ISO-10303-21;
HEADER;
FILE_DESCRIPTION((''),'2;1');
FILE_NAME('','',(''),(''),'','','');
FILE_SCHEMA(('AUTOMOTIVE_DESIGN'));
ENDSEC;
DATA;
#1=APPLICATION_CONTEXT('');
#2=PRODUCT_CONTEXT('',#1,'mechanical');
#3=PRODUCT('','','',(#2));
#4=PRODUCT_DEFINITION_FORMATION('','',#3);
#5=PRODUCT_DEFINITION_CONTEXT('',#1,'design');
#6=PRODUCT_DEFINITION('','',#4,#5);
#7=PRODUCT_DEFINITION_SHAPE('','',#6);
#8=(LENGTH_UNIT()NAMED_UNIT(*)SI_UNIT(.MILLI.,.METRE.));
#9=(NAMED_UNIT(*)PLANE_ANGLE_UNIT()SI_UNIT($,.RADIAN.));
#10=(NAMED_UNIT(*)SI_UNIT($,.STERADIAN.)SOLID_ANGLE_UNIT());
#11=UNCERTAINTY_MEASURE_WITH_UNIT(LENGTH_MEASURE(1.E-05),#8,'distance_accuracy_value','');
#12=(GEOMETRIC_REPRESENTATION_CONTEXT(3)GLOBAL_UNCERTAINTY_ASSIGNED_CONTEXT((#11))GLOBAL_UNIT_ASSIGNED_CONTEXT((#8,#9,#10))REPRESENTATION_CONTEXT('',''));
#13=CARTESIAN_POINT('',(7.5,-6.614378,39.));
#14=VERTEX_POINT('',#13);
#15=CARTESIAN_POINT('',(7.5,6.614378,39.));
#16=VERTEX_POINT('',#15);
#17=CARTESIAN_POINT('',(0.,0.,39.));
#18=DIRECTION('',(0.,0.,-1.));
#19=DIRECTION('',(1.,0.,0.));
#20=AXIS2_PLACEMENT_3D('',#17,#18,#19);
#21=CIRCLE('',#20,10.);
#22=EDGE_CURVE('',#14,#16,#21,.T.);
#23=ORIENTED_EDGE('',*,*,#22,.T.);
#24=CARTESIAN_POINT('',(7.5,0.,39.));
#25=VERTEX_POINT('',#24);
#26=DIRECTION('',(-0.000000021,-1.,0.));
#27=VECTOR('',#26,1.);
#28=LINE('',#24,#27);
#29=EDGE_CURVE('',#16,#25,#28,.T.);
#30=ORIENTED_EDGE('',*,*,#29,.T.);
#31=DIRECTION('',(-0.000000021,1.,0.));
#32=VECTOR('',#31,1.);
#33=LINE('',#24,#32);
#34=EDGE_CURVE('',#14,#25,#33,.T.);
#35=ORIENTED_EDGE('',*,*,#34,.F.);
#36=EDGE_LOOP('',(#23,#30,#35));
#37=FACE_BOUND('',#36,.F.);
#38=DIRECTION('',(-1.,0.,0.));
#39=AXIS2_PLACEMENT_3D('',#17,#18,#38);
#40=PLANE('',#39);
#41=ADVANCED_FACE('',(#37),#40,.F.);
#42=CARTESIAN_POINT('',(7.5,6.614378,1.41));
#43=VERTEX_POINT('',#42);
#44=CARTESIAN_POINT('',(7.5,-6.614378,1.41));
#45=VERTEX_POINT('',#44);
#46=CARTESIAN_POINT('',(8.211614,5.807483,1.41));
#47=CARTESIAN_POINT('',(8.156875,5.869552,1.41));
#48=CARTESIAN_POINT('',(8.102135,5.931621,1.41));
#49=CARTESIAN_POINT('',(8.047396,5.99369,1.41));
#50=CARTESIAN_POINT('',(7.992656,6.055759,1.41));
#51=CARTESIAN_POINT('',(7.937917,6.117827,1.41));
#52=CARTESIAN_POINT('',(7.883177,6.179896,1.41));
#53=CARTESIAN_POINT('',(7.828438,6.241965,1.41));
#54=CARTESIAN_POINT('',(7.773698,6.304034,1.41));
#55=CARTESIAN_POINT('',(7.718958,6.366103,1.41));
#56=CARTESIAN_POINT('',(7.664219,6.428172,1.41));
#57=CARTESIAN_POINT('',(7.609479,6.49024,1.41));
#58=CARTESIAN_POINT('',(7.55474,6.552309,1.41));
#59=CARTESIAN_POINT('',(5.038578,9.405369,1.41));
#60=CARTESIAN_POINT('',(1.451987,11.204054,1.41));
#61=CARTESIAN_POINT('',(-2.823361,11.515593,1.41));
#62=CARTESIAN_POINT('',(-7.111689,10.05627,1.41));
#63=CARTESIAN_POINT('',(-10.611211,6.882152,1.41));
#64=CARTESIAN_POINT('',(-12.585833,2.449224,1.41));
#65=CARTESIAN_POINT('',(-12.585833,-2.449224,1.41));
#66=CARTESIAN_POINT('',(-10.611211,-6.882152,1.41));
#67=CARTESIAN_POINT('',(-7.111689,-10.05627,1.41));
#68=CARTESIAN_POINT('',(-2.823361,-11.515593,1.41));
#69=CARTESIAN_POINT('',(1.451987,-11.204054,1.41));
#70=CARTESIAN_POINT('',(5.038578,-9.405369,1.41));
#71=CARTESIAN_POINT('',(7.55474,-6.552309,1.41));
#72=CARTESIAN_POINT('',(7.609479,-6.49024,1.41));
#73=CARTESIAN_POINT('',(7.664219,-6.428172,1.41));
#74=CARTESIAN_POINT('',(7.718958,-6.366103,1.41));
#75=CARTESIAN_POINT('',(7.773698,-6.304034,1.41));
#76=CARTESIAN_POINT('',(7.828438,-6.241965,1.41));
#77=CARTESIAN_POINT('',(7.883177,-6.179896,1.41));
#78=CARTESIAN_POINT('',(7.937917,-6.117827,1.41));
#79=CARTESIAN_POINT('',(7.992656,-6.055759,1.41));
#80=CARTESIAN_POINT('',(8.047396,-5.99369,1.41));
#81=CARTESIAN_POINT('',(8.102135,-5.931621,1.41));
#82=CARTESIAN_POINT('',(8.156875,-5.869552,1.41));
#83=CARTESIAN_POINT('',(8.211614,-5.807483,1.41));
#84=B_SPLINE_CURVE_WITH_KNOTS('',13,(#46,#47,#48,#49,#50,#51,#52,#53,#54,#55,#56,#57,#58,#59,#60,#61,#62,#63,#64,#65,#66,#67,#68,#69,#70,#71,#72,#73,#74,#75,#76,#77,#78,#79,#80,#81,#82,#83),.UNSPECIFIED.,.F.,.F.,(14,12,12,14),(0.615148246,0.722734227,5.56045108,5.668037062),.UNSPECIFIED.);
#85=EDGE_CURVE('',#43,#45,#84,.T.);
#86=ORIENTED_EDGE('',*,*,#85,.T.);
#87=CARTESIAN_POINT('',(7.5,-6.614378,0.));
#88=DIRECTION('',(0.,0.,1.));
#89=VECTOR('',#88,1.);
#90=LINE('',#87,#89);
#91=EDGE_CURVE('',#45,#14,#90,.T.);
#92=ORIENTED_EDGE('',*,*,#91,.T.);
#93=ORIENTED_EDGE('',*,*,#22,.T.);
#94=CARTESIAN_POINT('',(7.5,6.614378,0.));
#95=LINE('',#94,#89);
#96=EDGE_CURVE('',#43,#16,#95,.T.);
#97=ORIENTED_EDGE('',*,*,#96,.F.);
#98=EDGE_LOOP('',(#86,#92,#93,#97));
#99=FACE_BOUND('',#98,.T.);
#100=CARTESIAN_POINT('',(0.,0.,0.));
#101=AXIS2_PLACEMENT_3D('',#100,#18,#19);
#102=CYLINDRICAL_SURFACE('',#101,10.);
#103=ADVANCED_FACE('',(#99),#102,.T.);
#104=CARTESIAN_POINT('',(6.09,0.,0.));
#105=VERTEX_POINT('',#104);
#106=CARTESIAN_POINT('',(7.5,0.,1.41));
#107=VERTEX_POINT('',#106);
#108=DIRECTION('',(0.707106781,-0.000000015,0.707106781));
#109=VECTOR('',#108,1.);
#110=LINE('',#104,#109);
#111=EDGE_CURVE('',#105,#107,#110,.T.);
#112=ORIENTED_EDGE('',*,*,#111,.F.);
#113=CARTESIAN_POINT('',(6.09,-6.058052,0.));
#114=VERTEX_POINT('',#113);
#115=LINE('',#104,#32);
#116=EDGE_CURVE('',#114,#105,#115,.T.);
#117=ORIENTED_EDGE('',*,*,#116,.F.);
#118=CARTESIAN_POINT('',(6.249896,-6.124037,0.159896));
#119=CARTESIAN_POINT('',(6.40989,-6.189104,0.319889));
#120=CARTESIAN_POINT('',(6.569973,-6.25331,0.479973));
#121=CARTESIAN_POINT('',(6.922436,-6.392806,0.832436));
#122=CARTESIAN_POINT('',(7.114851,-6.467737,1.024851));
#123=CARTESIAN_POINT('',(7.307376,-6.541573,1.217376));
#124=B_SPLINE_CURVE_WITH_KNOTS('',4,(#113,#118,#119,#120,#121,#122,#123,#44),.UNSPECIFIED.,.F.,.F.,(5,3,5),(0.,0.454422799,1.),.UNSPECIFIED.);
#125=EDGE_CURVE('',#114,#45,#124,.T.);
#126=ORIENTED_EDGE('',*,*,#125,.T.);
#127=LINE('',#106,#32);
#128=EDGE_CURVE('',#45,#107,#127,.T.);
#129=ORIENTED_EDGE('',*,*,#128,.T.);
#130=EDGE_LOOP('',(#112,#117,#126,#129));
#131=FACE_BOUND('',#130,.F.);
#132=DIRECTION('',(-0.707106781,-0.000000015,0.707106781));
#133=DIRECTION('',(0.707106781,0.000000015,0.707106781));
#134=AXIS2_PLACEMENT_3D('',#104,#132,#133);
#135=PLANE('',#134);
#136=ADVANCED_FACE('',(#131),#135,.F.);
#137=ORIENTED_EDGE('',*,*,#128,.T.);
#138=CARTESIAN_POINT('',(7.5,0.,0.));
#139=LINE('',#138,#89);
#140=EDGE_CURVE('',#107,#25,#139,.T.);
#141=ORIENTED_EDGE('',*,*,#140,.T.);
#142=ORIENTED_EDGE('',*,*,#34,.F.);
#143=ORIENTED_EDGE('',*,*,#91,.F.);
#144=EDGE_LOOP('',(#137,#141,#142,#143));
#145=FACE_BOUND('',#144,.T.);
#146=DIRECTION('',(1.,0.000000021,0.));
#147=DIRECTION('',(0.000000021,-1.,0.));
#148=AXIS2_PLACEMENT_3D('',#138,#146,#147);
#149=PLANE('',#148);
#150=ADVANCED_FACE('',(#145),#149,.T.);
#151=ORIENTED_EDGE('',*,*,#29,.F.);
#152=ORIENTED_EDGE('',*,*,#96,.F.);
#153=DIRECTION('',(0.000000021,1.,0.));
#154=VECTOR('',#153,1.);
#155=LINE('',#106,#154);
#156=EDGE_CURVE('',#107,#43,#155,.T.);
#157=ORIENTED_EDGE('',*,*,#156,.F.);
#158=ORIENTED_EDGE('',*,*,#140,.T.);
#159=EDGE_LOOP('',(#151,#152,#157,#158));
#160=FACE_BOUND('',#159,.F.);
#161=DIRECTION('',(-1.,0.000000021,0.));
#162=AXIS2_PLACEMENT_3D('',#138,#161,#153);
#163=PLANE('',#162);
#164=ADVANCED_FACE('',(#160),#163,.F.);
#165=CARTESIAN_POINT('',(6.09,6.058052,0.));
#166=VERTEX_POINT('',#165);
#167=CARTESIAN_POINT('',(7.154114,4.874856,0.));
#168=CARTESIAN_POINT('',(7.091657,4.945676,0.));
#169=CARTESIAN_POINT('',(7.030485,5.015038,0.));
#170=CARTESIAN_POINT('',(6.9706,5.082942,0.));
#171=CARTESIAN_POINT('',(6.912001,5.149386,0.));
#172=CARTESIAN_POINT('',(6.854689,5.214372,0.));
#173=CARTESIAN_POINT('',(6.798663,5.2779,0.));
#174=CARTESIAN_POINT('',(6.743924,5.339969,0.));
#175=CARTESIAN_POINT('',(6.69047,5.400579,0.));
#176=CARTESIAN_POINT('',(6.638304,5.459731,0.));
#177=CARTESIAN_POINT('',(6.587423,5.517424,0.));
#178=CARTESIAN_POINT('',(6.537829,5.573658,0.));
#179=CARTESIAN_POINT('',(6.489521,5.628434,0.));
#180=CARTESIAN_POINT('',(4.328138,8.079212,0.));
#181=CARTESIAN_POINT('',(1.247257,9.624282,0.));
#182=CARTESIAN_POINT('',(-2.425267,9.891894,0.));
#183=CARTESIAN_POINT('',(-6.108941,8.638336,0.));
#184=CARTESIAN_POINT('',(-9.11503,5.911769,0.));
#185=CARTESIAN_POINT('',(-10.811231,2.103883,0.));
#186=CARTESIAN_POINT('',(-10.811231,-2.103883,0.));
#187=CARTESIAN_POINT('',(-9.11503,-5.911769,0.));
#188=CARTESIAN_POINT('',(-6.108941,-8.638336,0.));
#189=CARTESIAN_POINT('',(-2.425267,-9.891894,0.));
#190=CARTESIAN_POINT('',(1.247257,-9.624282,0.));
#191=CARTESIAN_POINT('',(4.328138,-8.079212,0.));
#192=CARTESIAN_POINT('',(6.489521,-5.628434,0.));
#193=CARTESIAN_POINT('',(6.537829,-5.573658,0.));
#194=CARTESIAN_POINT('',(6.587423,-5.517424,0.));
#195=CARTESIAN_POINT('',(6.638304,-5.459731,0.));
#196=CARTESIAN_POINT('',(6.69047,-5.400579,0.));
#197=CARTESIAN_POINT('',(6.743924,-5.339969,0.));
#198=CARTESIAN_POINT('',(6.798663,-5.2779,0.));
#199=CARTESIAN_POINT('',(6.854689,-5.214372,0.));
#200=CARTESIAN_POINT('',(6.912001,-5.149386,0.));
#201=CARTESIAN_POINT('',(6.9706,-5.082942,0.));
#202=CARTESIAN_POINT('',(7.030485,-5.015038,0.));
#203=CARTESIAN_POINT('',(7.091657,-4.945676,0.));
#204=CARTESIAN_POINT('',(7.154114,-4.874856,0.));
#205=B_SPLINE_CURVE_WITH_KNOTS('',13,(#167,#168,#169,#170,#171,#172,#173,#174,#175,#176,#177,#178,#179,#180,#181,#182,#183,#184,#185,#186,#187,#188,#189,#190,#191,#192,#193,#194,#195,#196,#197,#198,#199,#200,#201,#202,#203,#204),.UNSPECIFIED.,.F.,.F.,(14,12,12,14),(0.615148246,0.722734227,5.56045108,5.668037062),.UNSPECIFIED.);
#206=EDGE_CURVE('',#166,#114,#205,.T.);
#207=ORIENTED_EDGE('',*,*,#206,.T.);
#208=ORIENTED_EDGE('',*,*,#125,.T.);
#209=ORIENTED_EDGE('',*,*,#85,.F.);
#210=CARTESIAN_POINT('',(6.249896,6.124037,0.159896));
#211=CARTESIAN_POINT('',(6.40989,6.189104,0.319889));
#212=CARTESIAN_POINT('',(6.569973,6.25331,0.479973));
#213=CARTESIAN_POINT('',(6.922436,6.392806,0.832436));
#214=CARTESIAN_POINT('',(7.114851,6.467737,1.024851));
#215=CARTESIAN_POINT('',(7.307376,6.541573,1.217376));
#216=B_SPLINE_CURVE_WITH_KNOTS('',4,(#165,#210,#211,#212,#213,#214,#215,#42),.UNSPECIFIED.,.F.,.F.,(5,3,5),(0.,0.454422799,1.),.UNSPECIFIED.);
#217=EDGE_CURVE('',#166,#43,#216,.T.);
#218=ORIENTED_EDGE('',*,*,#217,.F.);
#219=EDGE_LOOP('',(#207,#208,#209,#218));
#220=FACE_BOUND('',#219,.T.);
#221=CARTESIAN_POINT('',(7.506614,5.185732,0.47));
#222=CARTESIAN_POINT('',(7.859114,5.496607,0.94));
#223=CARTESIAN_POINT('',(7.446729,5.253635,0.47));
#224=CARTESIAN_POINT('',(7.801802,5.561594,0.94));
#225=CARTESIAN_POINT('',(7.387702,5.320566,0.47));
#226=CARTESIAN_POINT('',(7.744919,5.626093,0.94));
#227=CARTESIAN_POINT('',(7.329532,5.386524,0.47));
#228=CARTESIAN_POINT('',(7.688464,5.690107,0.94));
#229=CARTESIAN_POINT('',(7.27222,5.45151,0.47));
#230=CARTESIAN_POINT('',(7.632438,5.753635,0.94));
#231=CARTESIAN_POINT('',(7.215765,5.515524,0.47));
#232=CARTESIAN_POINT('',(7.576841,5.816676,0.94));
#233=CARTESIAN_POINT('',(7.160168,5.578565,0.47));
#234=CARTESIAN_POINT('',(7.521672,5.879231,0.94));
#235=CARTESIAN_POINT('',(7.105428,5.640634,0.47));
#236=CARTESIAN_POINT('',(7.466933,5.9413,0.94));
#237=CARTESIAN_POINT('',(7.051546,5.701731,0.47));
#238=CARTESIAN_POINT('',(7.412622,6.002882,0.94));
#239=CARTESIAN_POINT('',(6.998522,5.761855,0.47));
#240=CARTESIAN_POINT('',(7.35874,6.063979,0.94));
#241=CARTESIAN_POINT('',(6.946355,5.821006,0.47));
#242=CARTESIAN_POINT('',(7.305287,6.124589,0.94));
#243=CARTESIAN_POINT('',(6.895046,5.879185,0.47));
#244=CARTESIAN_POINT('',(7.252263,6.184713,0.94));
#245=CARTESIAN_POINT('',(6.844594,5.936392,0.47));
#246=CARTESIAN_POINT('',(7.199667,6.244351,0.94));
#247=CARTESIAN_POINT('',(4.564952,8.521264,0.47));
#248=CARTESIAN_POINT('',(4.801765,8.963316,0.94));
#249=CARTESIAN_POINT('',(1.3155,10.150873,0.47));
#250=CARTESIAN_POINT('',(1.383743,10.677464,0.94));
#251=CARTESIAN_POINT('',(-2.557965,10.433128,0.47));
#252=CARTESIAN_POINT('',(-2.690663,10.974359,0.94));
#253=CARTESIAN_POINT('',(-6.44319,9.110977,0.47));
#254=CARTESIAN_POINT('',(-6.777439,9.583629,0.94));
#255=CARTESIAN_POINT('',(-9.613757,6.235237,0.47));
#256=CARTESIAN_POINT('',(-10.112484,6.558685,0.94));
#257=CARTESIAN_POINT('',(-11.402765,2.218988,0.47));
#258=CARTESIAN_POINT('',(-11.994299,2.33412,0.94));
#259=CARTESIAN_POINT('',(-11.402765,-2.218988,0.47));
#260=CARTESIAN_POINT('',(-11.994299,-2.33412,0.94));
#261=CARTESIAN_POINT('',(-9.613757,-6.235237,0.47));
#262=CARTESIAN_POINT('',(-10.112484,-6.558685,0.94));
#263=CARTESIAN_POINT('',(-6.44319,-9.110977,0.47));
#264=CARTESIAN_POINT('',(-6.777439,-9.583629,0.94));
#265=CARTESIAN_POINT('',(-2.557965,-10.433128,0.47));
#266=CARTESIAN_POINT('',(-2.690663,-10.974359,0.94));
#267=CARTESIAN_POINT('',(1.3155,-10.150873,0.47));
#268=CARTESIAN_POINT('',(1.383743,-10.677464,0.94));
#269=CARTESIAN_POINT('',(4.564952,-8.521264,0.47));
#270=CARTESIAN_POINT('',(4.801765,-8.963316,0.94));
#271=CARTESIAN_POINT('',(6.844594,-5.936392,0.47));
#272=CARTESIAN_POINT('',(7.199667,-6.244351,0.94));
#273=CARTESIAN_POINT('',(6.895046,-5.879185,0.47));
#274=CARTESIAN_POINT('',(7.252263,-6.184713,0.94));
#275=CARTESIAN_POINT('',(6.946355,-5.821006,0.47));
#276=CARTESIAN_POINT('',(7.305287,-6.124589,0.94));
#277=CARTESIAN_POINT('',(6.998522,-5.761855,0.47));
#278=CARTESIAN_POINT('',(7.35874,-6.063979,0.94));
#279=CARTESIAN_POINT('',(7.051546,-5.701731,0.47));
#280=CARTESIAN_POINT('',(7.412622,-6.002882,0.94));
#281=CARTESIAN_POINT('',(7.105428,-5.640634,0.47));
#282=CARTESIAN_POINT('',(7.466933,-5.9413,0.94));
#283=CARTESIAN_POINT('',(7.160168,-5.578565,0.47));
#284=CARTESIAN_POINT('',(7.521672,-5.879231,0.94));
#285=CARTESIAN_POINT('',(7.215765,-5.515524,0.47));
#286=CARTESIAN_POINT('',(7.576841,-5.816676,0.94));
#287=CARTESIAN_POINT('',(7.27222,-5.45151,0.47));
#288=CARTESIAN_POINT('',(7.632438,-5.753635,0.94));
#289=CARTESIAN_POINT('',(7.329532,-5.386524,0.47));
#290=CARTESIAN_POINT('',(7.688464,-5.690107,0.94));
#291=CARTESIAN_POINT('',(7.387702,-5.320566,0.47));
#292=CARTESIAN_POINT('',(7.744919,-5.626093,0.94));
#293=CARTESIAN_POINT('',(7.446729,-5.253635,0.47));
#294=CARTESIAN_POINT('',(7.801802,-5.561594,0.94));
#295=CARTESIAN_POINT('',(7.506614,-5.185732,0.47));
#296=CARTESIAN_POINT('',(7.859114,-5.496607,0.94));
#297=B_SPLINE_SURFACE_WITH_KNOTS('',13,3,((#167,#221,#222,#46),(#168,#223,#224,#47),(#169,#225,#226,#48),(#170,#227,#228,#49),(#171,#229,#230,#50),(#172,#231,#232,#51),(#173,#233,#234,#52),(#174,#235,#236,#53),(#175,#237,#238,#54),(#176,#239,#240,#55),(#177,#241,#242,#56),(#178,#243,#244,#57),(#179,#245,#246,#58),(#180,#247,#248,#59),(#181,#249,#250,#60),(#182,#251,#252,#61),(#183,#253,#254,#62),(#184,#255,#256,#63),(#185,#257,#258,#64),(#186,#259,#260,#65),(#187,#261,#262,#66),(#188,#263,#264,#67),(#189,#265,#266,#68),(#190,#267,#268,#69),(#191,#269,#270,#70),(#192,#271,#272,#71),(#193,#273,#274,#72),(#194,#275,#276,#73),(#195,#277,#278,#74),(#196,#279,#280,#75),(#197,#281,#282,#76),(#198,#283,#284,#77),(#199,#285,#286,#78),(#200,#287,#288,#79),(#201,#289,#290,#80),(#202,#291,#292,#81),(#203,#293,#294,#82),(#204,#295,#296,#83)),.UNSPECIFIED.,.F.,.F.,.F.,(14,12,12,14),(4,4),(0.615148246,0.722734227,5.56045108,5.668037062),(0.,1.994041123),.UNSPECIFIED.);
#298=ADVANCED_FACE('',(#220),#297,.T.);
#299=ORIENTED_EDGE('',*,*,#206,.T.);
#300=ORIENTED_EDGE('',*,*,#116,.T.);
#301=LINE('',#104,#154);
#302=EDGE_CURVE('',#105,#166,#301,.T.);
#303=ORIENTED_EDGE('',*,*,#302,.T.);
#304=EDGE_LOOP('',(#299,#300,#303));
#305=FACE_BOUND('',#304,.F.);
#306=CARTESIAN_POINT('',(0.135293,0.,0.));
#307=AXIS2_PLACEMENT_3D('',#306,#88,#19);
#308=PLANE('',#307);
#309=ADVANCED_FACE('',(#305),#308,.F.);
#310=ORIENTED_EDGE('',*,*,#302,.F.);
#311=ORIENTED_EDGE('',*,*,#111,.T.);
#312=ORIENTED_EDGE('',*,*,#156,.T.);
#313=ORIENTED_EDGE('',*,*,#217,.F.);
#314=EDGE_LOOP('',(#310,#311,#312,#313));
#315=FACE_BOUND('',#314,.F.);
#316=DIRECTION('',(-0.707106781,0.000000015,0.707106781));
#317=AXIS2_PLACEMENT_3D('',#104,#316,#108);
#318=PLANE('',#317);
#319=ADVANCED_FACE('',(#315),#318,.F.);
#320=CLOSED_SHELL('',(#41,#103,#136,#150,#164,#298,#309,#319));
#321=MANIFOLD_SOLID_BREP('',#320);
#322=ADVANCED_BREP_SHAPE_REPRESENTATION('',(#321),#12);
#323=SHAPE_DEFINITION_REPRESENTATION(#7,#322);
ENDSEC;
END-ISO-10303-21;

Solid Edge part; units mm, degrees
sketch "Sketch1" plane through (0, 0, 0) normal (0, 0, 1) x (1, 0, 0)
  line L0 (7.5, 0) -> (7.5, 6.614378)
  line L1 (7.5, 0) -> (7.5, -6.614378)
  arc A0 (7.499989, -6.61439) -> (7.499989, 6.61439) centre (0, 0) cw
extrude "Protrusion1" add sketch "Sketch1" along normal blind 457.2
sketch "Sketch2" plane through (0, 0, 0) normal (0, 0, 1) x (1, 0, 0)
  line L0 (7.5, 0) -> (7.5, 6.614378)
  line L1 (7.5, 0) -> (7.5, -6.614378)
  arc A0 (7.499989, -6.61439) -> (7.499989, 6.61439) centre (0, 0) cw
sketch "Sketch3" plane through (0, 0, 0) normal (1, 0, 0) x (0, 1, 0)
  line L0 (10, 0) -> (8.59, 0)
  line L1 (8.59, 0) -> (10, 1.41)
  line L2 (10, 1.41) -> (10, 0)
sweep "SweptCutout_4" cut profiles "Sketch3" path "Sketch2"
sketch "Sketch4" plane through (0, 0, 0) normal (1, 0, 0) x (0, 1, 0)
  line L0 (10, 457.2) -> (8.59, 457.2)
  line L1 (8.59, 457.2) -> (10, 455.79)
  line L2 (10, 455.79) -> (10, 457.2)
sketch3d "SweptCutout_5 path"
  arc A0 (7.5, -6.614378, 457.2) -> (-10, 0, 457.2) centre (0, 0, 457.2)
  arc A1 (-10, 0, 457.2) -> (7.5, 6.614378, 457.2) centre (0, 0, 457.2)
  line L2 (7.5, 0, 457.2) -> (7.5, 6.614378, 457.2)
sweep "SweptCutout_5" cut profiles "Sketch4" path "SweptCutout_5 path"
sketch "Sketch5" plane through (0, 0, 39) normal (0, 0, 1) x (1, 0, 0)
  line L0 (25.491064, -13.358298) -> (-25.491064, -13.358298)
  line L1 (-25.491064, -13.358298) -> (-25.491064, 13.358298)
  line L2 (-25.491064, 13.358298) -> (25.491064, 13.358298)
  line L3 (25.491064, 13.358298) -> (25.491064, -13.358298)
extrude "ExtrudedCutout_1" cut sketch "Sketch5" along normal blind 433.531277
